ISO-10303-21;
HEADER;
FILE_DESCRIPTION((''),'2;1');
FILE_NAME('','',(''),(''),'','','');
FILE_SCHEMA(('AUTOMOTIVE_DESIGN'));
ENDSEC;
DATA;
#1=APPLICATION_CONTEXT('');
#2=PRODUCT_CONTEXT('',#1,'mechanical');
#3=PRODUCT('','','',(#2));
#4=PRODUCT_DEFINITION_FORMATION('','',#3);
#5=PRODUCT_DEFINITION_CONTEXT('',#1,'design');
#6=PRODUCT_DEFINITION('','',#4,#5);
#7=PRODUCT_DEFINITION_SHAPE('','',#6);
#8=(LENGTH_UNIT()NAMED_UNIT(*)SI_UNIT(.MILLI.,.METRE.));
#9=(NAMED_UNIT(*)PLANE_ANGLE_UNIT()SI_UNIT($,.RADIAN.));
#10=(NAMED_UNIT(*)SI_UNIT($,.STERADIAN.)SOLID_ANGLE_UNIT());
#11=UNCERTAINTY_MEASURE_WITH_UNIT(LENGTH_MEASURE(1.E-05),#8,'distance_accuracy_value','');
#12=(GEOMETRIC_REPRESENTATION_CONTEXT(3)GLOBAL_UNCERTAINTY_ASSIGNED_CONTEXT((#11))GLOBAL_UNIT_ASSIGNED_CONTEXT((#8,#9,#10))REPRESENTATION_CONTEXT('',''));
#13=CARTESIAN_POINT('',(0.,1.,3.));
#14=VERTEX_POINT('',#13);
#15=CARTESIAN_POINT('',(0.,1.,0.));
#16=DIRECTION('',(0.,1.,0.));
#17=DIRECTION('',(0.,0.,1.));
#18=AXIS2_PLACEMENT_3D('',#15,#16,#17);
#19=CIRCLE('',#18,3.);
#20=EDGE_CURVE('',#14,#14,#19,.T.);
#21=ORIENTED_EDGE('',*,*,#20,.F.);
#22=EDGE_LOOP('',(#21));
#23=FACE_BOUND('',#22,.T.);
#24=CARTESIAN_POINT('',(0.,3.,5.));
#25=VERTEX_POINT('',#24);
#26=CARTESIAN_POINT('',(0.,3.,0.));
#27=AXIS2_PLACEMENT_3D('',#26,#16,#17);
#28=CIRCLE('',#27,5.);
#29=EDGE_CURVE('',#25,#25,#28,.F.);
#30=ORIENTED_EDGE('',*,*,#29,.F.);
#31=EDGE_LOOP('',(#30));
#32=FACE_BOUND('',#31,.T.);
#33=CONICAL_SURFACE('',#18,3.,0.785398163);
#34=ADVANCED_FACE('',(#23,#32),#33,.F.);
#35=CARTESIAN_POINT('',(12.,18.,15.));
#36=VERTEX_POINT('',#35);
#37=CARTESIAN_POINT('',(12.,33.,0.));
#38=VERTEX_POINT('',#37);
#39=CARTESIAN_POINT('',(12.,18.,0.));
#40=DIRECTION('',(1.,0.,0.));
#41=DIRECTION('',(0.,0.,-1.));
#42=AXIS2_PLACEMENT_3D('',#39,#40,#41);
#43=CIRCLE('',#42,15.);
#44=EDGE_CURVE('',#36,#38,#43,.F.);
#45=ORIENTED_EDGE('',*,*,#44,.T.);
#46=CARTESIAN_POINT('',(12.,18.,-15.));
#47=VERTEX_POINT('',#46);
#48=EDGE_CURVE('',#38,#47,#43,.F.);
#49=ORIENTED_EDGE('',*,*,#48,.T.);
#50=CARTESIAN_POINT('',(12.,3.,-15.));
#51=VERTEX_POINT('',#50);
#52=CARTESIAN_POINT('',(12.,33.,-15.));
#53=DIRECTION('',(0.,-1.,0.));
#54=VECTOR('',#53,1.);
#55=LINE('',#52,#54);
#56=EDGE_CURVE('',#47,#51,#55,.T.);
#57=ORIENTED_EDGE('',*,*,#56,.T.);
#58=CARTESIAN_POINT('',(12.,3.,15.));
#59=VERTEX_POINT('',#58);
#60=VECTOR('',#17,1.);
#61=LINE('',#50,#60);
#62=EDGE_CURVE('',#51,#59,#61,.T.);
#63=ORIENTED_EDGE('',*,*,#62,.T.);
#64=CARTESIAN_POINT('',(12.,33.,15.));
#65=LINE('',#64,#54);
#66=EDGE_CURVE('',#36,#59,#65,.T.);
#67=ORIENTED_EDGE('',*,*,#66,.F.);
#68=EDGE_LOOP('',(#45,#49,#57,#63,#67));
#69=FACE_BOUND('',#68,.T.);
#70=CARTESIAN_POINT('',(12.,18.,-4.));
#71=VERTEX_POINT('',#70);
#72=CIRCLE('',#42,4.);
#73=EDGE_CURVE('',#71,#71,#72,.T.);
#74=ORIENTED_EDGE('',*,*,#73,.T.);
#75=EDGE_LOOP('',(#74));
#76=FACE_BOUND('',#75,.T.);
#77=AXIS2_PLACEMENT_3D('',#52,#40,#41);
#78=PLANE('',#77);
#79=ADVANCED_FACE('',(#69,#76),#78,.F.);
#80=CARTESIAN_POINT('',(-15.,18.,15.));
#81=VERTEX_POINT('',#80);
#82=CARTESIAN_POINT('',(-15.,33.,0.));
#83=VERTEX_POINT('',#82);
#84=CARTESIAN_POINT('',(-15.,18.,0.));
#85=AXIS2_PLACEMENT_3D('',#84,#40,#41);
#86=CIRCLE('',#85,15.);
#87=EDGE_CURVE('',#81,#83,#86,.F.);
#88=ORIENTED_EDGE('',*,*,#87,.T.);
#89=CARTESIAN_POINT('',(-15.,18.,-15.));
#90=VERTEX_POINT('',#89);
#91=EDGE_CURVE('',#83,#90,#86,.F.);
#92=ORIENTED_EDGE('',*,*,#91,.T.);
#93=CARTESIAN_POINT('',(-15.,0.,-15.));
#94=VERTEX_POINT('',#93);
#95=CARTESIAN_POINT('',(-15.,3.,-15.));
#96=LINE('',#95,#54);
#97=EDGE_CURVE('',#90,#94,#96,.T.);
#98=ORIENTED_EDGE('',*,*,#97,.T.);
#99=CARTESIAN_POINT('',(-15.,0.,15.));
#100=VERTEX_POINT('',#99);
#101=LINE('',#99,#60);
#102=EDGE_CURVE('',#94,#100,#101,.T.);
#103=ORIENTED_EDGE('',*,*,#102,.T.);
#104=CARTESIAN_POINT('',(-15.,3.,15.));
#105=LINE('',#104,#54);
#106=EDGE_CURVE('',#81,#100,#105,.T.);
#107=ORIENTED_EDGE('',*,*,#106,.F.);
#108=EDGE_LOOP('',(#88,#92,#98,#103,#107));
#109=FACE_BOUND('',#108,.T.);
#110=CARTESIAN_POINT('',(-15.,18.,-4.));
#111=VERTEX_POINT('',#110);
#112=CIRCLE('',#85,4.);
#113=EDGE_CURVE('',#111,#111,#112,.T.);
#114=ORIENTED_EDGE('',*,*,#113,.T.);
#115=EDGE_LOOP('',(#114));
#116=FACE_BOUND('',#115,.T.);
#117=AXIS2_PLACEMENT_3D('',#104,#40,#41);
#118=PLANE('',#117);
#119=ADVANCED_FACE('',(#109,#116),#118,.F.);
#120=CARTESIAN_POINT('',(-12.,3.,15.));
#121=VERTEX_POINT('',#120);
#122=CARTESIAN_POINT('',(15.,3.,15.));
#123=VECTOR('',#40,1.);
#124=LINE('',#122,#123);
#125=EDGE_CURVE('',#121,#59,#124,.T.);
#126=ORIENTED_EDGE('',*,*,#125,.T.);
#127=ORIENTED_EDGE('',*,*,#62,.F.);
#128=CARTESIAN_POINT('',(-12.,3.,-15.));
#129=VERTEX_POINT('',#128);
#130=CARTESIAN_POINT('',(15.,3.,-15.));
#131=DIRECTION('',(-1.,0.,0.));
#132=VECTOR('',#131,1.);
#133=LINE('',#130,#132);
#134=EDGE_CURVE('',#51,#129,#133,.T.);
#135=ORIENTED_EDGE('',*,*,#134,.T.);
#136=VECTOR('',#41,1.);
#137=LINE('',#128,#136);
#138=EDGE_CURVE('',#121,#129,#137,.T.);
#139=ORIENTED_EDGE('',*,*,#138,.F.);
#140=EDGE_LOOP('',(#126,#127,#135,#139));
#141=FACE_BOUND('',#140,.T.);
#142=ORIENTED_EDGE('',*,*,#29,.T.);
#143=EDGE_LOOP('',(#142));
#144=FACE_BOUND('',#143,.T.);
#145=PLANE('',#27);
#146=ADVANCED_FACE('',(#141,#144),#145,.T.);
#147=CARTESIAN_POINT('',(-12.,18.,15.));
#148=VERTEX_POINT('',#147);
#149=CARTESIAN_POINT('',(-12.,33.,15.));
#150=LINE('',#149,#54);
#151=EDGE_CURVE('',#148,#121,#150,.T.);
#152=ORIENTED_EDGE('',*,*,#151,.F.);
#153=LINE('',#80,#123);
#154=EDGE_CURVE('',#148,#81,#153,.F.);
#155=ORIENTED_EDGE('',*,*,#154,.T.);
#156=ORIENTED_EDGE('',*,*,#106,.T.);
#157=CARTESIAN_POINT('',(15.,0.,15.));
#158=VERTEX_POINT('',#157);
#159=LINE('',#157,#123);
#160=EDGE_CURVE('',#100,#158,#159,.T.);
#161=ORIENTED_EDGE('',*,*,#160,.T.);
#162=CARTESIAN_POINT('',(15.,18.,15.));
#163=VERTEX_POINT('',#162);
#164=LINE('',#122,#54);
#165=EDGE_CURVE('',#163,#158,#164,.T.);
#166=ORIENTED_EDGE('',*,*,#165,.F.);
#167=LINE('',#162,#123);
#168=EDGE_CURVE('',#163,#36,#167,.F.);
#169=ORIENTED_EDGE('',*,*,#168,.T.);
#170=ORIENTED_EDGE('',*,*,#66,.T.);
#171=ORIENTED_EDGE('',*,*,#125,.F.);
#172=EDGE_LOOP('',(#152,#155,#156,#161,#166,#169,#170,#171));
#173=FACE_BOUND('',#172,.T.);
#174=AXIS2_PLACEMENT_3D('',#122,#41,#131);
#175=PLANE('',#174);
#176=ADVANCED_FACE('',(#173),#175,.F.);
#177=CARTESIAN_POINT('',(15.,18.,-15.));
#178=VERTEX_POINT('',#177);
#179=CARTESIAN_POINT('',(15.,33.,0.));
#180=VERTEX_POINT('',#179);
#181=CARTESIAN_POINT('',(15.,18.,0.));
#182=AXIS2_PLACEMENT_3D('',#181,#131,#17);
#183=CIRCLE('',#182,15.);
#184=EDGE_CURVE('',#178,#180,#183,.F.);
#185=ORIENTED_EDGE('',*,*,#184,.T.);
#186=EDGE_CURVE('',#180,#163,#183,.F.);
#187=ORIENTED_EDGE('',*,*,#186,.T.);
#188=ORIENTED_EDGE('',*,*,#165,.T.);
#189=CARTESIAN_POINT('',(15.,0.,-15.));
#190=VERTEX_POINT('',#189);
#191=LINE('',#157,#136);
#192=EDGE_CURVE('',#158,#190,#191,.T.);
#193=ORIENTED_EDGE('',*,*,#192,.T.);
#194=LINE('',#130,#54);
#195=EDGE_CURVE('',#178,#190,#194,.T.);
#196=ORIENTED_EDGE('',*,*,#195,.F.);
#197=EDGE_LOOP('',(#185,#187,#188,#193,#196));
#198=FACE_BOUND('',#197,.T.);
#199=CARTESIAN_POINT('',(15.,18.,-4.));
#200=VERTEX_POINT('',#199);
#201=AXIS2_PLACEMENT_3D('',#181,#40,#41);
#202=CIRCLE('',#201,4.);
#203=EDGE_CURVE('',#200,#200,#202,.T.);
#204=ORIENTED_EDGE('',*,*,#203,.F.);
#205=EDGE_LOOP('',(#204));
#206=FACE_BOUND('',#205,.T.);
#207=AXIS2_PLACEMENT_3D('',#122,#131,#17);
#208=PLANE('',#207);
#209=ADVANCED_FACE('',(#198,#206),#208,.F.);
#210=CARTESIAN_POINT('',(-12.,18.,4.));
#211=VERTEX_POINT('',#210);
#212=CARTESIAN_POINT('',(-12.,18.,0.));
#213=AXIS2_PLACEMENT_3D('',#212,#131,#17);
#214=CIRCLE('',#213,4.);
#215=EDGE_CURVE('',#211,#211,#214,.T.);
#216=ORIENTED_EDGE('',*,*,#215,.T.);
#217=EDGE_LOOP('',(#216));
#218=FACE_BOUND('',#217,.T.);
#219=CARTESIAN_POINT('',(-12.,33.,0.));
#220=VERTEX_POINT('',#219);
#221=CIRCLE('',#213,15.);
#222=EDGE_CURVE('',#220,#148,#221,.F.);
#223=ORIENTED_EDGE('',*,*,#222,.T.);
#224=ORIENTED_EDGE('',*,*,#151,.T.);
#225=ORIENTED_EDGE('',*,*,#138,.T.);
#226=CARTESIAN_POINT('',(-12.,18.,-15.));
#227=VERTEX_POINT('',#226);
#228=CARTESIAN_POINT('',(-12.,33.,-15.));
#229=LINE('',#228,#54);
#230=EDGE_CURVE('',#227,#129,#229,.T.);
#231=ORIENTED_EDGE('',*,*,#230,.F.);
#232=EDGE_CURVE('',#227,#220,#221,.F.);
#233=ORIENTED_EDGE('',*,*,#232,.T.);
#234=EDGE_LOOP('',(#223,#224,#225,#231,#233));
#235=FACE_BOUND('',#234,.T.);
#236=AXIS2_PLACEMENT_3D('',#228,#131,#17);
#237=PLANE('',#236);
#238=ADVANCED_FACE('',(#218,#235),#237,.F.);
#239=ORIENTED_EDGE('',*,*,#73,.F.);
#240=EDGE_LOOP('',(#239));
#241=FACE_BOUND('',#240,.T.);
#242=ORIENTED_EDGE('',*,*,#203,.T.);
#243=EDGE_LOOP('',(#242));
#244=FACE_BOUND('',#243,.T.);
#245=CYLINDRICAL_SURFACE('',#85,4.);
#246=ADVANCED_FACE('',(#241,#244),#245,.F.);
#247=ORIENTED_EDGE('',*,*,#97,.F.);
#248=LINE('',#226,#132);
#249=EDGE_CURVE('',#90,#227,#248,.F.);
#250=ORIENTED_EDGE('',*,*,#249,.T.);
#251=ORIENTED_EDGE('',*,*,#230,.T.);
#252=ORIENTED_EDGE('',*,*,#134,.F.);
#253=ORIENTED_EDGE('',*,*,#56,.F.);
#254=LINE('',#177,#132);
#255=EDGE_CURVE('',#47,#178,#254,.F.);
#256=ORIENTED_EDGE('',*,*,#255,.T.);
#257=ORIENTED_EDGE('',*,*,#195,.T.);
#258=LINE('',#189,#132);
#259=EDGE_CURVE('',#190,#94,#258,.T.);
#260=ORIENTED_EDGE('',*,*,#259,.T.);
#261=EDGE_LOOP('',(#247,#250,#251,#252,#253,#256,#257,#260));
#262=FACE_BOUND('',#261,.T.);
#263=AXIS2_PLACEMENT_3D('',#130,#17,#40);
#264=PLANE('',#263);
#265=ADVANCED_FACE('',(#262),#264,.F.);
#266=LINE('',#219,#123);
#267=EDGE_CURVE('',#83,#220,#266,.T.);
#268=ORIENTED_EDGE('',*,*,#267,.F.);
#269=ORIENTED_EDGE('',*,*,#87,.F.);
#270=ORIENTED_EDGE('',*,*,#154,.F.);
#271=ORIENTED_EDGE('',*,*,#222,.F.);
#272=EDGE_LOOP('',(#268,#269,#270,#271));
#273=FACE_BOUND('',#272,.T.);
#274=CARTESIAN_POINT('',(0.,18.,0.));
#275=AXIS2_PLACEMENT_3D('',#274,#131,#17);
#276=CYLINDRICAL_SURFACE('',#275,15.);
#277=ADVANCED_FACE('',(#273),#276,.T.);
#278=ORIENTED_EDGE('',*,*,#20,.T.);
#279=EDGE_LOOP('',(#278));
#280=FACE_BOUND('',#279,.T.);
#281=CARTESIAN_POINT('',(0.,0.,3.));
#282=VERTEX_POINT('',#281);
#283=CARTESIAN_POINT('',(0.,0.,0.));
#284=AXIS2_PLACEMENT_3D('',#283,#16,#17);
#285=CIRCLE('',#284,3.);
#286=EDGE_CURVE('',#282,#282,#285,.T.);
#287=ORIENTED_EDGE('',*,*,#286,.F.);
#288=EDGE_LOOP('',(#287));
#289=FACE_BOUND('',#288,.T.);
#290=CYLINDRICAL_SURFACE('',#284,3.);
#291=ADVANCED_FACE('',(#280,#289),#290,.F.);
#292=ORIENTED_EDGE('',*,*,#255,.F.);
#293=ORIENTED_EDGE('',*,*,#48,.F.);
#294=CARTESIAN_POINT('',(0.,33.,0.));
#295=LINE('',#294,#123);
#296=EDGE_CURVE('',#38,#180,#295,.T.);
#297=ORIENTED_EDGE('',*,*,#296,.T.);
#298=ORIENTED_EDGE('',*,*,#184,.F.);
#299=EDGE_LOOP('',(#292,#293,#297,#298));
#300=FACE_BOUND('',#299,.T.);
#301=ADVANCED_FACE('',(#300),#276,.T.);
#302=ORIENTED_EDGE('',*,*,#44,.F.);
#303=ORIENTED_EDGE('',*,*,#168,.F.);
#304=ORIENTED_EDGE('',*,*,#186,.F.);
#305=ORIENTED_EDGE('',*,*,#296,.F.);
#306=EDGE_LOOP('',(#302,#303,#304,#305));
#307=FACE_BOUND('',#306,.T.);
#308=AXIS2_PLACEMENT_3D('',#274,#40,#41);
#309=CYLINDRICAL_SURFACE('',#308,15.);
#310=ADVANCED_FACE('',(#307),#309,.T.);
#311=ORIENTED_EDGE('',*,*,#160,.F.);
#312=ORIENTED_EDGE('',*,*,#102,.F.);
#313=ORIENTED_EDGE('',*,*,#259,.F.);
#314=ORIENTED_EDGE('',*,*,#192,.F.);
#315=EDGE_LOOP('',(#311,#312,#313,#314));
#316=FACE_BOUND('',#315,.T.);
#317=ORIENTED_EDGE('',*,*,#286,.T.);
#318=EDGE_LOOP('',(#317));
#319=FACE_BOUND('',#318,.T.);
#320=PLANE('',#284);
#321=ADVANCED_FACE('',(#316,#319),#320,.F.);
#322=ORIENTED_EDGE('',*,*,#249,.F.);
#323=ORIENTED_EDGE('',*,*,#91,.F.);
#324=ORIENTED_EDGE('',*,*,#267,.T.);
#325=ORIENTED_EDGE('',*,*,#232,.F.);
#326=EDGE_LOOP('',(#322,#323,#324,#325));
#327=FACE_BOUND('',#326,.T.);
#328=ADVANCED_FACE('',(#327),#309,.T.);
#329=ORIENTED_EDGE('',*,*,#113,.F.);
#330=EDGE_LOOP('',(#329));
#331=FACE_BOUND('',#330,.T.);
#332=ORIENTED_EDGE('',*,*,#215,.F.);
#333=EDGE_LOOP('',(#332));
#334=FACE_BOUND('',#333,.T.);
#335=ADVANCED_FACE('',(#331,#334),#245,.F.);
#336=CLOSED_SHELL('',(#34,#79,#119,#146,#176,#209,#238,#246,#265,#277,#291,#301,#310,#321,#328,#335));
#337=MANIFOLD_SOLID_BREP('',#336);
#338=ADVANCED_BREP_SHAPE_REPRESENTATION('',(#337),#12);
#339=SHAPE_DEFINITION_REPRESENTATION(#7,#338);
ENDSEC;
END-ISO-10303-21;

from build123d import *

# Parameters (mm, degrees)
CROQUIS1_W              = 30
CROQUIS1_H              = 30
SALIENTE_EXTRUIR1_DEPTH = 3
CROQUIS2_W              = 3
CROQUIS2_H              = 30
SALIENTE_EXTRUIR2_DEPTH = 30
REDONDEO1_R             = 15
CROQUIS3_R              = 4
CORTAR_EXTRUIR1_DEPTH   = 48.053161424
CROQUIS4_R              = 3
CORTAR_EXTRUIR2_DEPTH   = 37.742346142
CHAFL_N1_SIZE           = 2


with BuildPart() as part:
    # Croquis1 → Saliente-Extruir1 (new body)
    with BuildSketch(Plane(origin=(0, 0, 0), x_dir=(1, 0, 0), z_dir=(0, 1, 0))):
        Rectangle(CROQUIS1_W, CROQUIS1_H)
    extrude(amount=SALIENTE_EXTRUIR1_DEPTH)

    # Croquis2 → Saliente-Extruir2 (add)
    with BuildSketch(Plane(origin=(0, 3, 0), x_dir=(1, 0, 0), z_dir=(0, 1, 0))):
        with Locations((-13.5, 0)):
            Rectangle(CROQUIS2_W, CROQUIS2_H)
        with Locations((13.5, 0)):
            Rectangle(CROQUIS2_W, CROQUIS2_H)
    extrude(amount=SALIENTE_EXTRUIR2_DEPTH)

    # Redondeo1
    redondeo1_edges = [part.edges().sort_by_distance(p)[0] for p in [
        (-13.5, 33, -15),
        (13.5, 33, -15),
        (13.5, 33, 15),
        (-13.5, 33, 15),
    ]]
    fillet(redondeo1_edges, radius=REDONDEO1_R - 0.0001)  # a hair under: the kernel refuses the full size

    # Croquis3 → Cortar-Extruir1 (cut, through all)
    with BuildSketch(Plane(origin=(15, 0, 0), x_dir=(0, 0, -1), z_dir=(1, 0, 0))):
        with Locations((0, 18)):
            Circle(CROQUIS3_R)
    extrude(amount=-CORTAR_EXTRUIR1_DEPTH, mode=Mode.SUBTRACT)

    # Croquis4 → Cortar-Extruir2 (cut, through all)
    with BuildSketch(Plane(origin=(0, 3, 0), x_dir=(1, 0, 0), z_dir=(0, 1, 0))):
        with Locations(Location((0, 0, 0), (0, 0, 270))):
            Circle(CROQUIS4_R)
    extrude(amount=-CORTAR_EXTRUIR2_DEPTH, mode=Mode.SUBTRACT)

    # Chaflán1
    chafl_n1_edges = [part.edges().sort_by_distance(p)[0] for p in [
        (0, 3, -3),
    ]]
    chamfer(chafl_n1_edges, length=CHAFL_N1_SIZE)


solid = part.part
